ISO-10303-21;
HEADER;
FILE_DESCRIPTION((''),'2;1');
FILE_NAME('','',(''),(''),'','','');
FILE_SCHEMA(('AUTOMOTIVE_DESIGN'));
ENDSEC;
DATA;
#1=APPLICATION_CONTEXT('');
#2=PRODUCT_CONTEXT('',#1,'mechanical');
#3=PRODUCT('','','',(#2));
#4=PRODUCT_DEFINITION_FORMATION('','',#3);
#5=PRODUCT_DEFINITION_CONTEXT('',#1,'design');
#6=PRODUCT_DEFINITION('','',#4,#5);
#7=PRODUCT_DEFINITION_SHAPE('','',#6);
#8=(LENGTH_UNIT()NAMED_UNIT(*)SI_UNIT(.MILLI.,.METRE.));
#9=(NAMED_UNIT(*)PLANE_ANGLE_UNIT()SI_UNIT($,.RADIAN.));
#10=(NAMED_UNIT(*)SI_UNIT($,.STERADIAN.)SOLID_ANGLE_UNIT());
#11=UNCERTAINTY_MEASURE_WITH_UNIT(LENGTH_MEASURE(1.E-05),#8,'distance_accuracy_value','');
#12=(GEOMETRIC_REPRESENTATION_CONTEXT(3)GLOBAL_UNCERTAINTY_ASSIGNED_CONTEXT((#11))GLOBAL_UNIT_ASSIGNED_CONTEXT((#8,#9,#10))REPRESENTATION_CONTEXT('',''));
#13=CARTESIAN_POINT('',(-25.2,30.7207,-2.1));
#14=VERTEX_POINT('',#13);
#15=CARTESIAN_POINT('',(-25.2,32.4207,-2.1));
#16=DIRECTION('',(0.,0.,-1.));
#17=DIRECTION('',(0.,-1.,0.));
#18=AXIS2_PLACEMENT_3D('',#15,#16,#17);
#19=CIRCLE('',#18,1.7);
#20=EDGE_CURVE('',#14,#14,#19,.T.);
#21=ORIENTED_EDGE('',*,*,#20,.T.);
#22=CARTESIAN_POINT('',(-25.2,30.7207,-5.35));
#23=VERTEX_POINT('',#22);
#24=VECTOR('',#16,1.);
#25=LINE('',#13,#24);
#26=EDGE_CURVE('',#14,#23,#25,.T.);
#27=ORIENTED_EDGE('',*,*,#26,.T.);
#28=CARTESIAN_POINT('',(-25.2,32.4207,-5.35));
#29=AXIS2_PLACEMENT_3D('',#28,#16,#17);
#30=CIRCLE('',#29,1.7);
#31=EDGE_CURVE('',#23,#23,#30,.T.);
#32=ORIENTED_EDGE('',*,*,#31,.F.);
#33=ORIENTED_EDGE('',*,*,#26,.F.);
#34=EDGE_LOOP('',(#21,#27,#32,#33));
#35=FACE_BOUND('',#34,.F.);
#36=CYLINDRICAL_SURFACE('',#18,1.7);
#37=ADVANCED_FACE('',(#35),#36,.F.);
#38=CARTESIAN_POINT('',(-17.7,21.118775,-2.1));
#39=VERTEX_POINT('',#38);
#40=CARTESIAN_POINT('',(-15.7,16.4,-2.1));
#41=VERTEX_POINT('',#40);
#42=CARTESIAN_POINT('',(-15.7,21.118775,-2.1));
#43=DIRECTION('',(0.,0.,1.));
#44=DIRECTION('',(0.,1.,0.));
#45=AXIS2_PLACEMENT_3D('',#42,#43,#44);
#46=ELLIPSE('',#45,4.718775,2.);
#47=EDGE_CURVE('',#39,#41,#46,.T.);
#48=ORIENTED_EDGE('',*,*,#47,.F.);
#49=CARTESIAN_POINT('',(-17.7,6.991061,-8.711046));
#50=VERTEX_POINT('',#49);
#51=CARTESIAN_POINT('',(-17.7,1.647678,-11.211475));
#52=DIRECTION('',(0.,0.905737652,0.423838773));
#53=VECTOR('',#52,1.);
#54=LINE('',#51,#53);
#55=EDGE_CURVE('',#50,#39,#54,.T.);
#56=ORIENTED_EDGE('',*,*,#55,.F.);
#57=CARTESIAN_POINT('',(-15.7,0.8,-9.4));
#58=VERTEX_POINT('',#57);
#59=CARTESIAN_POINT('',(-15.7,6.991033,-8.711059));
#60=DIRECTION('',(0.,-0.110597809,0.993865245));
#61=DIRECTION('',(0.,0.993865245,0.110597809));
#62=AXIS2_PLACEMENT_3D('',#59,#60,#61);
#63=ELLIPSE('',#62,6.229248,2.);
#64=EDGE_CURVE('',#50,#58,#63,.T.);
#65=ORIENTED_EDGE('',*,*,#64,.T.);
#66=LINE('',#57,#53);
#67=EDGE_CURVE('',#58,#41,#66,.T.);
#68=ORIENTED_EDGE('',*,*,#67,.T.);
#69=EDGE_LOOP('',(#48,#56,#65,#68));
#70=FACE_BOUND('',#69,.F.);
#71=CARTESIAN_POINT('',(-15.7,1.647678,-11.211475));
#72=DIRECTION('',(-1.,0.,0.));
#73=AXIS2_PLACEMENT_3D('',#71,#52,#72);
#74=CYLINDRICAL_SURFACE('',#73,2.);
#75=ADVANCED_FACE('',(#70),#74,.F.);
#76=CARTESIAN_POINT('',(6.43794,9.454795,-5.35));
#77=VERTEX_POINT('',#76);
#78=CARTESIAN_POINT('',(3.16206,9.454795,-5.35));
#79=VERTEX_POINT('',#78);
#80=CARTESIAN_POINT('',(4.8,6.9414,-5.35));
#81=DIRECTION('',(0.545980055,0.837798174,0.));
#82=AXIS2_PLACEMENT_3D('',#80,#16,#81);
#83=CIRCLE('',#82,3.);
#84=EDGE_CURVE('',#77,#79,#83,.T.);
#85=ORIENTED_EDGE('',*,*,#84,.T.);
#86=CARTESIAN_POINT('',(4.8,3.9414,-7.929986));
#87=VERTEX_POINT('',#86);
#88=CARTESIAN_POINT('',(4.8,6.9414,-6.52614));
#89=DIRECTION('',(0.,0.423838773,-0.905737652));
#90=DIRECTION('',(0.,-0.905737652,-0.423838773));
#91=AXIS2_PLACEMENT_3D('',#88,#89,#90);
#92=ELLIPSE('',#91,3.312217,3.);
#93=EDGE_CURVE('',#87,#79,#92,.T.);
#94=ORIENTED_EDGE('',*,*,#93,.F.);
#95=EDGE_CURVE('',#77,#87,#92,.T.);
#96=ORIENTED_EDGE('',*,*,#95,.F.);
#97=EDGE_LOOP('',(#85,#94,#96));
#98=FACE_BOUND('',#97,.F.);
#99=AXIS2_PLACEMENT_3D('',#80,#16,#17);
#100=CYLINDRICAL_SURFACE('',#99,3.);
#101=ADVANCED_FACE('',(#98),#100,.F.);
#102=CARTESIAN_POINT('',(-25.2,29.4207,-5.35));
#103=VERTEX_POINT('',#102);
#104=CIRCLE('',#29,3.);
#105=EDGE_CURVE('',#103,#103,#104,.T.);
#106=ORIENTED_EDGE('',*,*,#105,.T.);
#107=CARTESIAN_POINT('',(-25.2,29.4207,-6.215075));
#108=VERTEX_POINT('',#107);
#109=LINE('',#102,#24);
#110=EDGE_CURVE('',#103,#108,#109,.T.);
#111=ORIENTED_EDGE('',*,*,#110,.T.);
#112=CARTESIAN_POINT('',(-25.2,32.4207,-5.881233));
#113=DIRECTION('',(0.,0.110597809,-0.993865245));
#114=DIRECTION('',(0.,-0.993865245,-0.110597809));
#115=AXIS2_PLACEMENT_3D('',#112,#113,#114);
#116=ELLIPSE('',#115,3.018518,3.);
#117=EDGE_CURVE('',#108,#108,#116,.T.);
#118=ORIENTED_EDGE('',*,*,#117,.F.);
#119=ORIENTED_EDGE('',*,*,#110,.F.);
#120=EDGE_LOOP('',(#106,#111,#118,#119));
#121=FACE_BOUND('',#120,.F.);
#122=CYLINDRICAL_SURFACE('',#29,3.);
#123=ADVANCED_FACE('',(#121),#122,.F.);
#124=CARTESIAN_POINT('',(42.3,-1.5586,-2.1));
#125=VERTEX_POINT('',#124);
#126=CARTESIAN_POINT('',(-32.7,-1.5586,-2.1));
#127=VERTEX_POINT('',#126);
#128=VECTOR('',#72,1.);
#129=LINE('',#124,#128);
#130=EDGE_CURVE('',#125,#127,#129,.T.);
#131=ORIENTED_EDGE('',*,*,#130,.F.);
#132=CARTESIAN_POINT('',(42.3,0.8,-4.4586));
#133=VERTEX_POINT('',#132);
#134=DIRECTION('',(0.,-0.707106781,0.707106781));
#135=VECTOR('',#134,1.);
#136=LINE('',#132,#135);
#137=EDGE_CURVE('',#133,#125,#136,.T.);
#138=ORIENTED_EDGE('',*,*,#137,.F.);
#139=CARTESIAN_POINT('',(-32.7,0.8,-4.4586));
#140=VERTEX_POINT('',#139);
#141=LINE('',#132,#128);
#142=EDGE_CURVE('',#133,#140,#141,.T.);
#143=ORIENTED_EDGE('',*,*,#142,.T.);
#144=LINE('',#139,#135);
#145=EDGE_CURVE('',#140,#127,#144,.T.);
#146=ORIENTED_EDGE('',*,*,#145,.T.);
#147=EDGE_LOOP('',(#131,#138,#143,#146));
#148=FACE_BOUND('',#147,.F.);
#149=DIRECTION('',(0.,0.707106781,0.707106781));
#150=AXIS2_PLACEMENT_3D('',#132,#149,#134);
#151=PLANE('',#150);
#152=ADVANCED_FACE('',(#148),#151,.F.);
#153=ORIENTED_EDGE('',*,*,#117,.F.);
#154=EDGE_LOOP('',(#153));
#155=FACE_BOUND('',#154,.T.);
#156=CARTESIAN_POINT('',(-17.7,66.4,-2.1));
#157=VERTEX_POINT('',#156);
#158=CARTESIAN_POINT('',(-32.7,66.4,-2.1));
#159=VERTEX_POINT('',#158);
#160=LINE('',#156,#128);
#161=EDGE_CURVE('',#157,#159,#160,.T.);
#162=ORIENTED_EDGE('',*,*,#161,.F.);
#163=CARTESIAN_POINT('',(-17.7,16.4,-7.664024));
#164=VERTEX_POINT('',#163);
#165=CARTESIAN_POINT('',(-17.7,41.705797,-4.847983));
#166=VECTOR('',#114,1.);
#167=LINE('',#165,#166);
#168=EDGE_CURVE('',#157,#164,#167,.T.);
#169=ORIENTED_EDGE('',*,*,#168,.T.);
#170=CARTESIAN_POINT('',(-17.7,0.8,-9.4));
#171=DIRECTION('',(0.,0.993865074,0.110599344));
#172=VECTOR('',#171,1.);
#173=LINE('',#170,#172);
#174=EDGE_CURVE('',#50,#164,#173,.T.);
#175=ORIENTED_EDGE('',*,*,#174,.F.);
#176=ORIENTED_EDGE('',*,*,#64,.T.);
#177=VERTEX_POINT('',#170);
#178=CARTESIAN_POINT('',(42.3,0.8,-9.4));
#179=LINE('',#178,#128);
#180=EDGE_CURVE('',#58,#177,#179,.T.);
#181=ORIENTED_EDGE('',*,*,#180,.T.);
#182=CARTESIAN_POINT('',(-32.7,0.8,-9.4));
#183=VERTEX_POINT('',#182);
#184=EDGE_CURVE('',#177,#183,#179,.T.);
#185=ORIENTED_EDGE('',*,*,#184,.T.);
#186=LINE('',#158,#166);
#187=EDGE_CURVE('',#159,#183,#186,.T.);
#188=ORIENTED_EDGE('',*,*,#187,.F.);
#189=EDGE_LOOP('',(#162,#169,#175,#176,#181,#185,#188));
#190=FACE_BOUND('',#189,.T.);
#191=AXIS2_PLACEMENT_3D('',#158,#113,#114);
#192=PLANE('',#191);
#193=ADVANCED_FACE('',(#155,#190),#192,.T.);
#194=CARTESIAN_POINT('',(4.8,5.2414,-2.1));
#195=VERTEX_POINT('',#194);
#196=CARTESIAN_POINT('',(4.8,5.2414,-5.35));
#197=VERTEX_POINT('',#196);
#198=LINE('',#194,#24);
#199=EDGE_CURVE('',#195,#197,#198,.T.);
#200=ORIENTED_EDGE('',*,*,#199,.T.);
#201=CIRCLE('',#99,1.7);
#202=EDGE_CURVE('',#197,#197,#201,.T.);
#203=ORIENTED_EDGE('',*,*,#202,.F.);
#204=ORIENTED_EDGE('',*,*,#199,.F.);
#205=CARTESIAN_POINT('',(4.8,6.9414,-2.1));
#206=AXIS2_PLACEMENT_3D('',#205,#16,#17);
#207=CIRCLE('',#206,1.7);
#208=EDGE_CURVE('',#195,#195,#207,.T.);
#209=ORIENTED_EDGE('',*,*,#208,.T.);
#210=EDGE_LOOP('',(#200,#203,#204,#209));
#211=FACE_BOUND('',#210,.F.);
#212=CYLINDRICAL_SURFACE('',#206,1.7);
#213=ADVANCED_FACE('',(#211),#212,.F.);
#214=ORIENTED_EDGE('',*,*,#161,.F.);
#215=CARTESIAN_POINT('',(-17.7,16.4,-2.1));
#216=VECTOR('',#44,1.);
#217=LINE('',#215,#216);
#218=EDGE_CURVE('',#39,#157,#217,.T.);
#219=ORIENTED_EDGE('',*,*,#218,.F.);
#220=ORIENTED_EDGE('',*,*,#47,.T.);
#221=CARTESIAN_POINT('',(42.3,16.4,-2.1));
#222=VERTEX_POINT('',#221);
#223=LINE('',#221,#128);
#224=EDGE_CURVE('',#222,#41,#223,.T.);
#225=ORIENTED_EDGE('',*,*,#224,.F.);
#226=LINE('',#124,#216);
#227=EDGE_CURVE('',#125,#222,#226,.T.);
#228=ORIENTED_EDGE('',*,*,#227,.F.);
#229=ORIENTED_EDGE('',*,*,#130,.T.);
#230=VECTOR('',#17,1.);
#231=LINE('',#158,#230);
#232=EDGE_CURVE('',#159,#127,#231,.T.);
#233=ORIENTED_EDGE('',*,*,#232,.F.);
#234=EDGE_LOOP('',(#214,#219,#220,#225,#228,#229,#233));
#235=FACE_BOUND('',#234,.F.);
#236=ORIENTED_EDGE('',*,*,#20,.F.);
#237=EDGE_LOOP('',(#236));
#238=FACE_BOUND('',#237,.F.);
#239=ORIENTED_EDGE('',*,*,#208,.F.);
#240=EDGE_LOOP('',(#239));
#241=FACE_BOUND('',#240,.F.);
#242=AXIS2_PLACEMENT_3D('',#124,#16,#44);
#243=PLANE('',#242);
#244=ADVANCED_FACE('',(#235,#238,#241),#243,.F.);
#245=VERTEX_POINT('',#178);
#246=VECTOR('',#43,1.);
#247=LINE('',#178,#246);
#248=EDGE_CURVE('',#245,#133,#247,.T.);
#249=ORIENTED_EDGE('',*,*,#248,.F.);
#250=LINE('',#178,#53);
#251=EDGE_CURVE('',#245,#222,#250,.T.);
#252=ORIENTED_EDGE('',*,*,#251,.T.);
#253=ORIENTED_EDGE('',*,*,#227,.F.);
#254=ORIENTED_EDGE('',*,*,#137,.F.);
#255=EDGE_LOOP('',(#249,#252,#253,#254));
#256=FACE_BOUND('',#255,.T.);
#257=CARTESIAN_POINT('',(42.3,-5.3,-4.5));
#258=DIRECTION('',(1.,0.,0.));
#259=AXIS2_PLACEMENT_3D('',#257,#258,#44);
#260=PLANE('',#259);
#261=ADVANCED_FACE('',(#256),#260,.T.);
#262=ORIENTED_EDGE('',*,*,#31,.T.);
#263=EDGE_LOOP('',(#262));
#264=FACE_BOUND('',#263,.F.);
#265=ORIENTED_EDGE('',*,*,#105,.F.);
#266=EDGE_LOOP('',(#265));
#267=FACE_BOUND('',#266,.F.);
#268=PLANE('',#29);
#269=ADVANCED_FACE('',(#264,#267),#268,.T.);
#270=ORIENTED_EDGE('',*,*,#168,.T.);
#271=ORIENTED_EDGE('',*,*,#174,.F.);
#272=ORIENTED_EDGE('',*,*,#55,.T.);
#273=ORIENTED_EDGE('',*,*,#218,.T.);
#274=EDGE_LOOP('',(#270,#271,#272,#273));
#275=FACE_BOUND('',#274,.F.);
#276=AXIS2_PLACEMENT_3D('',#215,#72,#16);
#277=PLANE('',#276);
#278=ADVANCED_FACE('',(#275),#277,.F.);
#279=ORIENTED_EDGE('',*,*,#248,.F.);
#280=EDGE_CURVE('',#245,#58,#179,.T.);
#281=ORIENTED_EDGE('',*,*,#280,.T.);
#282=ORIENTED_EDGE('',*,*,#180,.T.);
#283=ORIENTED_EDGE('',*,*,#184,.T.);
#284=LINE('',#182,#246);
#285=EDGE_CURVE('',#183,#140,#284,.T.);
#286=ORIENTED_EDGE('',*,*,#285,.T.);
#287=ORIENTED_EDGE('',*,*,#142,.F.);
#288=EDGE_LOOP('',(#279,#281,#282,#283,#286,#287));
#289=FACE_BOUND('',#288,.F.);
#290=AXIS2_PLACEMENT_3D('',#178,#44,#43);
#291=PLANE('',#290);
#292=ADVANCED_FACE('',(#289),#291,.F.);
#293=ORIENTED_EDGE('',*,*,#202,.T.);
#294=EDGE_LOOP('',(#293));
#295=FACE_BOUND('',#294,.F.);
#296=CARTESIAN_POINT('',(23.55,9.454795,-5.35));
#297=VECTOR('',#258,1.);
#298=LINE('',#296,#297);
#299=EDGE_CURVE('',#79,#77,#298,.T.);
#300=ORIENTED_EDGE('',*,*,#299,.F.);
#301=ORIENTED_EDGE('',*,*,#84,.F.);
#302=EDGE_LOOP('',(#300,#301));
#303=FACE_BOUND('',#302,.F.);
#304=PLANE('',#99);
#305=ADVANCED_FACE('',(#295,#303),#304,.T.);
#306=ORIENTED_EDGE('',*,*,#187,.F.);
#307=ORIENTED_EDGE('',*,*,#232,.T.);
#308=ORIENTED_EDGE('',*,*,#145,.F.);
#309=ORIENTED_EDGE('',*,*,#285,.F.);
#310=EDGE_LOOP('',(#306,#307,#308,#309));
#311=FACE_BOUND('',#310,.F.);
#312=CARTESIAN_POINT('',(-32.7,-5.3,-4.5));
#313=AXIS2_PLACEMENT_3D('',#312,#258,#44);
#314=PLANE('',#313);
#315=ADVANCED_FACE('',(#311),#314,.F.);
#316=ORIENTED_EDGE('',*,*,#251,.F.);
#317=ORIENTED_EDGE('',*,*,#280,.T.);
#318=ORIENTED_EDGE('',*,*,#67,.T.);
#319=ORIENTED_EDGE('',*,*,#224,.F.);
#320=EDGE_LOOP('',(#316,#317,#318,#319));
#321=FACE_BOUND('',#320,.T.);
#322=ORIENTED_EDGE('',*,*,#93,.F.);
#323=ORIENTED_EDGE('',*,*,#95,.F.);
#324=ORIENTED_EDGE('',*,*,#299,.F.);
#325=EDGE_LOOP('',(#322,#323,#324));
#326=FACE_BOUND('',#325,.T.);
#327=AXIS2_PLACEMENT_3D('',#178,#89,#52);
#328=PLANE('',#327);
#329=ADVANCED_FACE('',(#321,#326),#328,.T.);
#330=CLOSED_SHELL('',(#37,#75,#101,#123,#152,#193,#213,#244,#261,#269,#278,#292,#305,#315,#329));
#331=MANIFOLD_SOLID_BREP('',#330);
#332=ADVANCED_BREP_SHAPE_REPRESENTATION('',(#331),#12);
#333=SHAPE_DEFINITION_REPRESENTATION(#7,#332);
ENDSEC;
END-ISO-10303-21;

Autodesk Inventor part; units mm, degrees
ref_plane "YZ Plane" through (0, 0, 0) normal (1, 0, 0) x (0, 1, 0)
ref_plane "XZ Plane" through (0, 0, 0) normal (0, 1, 0) x (-1, 0, 0)
ref_plane "XY Plane" through (0, 0, 0) normal (0, 0, 1) x (1, 0, 0)
ref_plane "Work Plane3" through (42.3, -5.3, -4.5) normal (1, 0, 0) x (0, 1, 0)
sketch "Sketch3" plane through (42.3, -5.3, -4.5) normal (1, 0, 0) x (0, 1, 0)
  line L0 (3.5, 2.5) -> (6, 0) projected
  line L1 (6, -5) -> (6, 0) projected
  line L2 (3.5, 2.5) -> (21.8, 2.5)
  line L3 (6, -5) -> (21.8, -5)
  line L4 (21.8, -5) -> (21.8, 2.5)
  line L5 (21.7, 2.4) -> (21.7, -4.9)
  line L6 (21.7, -4.9) -> (6.1, -4.9)
  line L7 (6.1, -4.9) -> (6.1, 0.0414)
  line L8 (6.1, 0.0414) -> (3.7414, 2.4)
  line L9 (3.7414, 2.4) -> (21.7, 2.4)
  point P0 (21.7, 2.4)
  dimension "d0" = 0.1
  dimension "d36" = 15.8
  dimension "d37" = 7.3
  dimension "d38" = 15.7
  dimension "d39" = 15.7
  dimension "d40" = 12.7986
extrude "Extrusion1" add sketch "Sketch3" against normal blind 75 contours L5 L6 L7 L8 L9
sketch "Sketch4" plane through (42.3, 16.4, -2.1) normal (0, 1, 0) x (1, 0, 0)
  line L0 (-60, -0.1) -> (-75, -0.1) projected
  line L1 (-75, -0.1) -> (-75, -7.1) projected
  line L2 (-60, 0) -> (-75, 0)
  line L3 (-75, 7.3) -> (-60, 7.3)
  arc A0 (-75, -7.1) -> (-70, -12.1) centre (-70, -7.1) ccw projected
  line L4 (-60, -12.1) -> (-70, -12.1) projected
  line L5 (-60, -0.1) -> (-60, -8.7171) projected
  line L6 (-60, -10.4829) -> (-60, -12.1) projected
  line L7 (-60, -10.4829) -> (-63.5, -11.1) projected
  line L8 (-63.5, -11.1) -> (-63.5, -8.1) projected
  line L9 (-63.5, -8.1) -> (-60, -8.7171) projected
  line L10 (-60, 0) -> (-60, 7.3)
  line L11 (-75, 0) -> (-75, 7.3)
  dimension "d41" = 15
extrude "Extrusion2" add sketch "Sketch4" along normal blind 50 contours L2 L11 L3 L10
sketch "Sketch5" plane through (-32.7, -5.3, -4.5) normal (-1, 0, 0) x (0, 0, 1)
  line L0 (2.4, 3.7414) -> (2.4, 71.7) projected
  line L1 (2.4, 71.7) -> (2.4, 3.7414)
  line L2 (-4.9, 6.1) -> (0.0414, 6.1) projected
  line L3 (2.4, 3.7414) -> (0.0414, 6.1)
  line L4 (0.0414, 6.1) -> (-4.9, 6.1)
  line L5 (2.4, 71.7) -> (-4.9, 6.1)
  line L6 (2.4, 71.7) -> (-4.9, 71.7)
  line L7 (-4.9, 71.7) -> (-4.9, 6.1)
extrude "Extrusion3" cut sketch "Sketch5" against normal through all contours L5 L7 L6
sketch "Sketch6" plane through (42.3, -5.3, -4.5) normal (1, 0, 0) x (0, 0, -1)
  line L0 (3.164, 21.7) -> (-2.4, 71.7) projected
  line L1 (4.9, 6.1) -> (3.164, 21.7)
  line L2 (3.164, 21.7) -> (-2.4, 21.7)
  line L3 (-2.4, 3.7414) -> (-2.4, 71.7) projected
  line L4 (4.9, 6.1) -> (-2.4, 21.7)
extrude "Extrusion4" cut sketch "Sketch6" against normal blind 60 contours L1 L4 L2
sketch "Sketch7" plane through (-32.7, -1.5586, -2.1) normal (0, 0, 1) x (1, 0, 0)
  line L0 (75, 0) -> (0, 0) projected
  line L1 (0, 0) -> (0, 67.9586) projected
  line L2 (0, 67.9586) -> (15, 67.9586) projected
  line L3 (15, 17.9586) -> (15, 67.9586) projected
  point P0 (32.7, 1.5586)
  point P1 (37.5, 8.5)
  point P2 (7.5, 33.9793)
  point P3 (15, 22.6774)
  dimension "d10" = 37.5
  dimension "d11" = 8.5
  dimension "d12" = 7.5
  dimension "d13" = 33.9793
hole "Hole1" at (4.8, 6.9414, -2.1) at (-25.2, 32.4207, -2.1) direction (0, 0, -1) diameter 3.4 end through all clearance for "Flat Head Machine Screw" size "M3" standard "Ansi Metric M Profile"
ref_plane "Work Plane4" through (-32.7, -1.5586, -5.35) normal (0, 0, 1) x (1, 0, 0)
sketch "Sketch10" plane through (-32.7, -1.5586, -5.35) normal (0, 0, 1) x (1, 0, 0)
  point P0 (32.7, 1.5586)
  point P1 (37.5, 8.5)
  point P2 (7.5, 33.9793)
hole "Hole2" at (4.8, 6.9414, -5.35) at (-25.2, 32.4207, -5.35) direction (0, 0, -1) diameter 6 end through all
fillet "Fillet2" radius 2 1 edges at (-17.7, 8.6, -5.75)
properties part number "Base Gripper Support"
